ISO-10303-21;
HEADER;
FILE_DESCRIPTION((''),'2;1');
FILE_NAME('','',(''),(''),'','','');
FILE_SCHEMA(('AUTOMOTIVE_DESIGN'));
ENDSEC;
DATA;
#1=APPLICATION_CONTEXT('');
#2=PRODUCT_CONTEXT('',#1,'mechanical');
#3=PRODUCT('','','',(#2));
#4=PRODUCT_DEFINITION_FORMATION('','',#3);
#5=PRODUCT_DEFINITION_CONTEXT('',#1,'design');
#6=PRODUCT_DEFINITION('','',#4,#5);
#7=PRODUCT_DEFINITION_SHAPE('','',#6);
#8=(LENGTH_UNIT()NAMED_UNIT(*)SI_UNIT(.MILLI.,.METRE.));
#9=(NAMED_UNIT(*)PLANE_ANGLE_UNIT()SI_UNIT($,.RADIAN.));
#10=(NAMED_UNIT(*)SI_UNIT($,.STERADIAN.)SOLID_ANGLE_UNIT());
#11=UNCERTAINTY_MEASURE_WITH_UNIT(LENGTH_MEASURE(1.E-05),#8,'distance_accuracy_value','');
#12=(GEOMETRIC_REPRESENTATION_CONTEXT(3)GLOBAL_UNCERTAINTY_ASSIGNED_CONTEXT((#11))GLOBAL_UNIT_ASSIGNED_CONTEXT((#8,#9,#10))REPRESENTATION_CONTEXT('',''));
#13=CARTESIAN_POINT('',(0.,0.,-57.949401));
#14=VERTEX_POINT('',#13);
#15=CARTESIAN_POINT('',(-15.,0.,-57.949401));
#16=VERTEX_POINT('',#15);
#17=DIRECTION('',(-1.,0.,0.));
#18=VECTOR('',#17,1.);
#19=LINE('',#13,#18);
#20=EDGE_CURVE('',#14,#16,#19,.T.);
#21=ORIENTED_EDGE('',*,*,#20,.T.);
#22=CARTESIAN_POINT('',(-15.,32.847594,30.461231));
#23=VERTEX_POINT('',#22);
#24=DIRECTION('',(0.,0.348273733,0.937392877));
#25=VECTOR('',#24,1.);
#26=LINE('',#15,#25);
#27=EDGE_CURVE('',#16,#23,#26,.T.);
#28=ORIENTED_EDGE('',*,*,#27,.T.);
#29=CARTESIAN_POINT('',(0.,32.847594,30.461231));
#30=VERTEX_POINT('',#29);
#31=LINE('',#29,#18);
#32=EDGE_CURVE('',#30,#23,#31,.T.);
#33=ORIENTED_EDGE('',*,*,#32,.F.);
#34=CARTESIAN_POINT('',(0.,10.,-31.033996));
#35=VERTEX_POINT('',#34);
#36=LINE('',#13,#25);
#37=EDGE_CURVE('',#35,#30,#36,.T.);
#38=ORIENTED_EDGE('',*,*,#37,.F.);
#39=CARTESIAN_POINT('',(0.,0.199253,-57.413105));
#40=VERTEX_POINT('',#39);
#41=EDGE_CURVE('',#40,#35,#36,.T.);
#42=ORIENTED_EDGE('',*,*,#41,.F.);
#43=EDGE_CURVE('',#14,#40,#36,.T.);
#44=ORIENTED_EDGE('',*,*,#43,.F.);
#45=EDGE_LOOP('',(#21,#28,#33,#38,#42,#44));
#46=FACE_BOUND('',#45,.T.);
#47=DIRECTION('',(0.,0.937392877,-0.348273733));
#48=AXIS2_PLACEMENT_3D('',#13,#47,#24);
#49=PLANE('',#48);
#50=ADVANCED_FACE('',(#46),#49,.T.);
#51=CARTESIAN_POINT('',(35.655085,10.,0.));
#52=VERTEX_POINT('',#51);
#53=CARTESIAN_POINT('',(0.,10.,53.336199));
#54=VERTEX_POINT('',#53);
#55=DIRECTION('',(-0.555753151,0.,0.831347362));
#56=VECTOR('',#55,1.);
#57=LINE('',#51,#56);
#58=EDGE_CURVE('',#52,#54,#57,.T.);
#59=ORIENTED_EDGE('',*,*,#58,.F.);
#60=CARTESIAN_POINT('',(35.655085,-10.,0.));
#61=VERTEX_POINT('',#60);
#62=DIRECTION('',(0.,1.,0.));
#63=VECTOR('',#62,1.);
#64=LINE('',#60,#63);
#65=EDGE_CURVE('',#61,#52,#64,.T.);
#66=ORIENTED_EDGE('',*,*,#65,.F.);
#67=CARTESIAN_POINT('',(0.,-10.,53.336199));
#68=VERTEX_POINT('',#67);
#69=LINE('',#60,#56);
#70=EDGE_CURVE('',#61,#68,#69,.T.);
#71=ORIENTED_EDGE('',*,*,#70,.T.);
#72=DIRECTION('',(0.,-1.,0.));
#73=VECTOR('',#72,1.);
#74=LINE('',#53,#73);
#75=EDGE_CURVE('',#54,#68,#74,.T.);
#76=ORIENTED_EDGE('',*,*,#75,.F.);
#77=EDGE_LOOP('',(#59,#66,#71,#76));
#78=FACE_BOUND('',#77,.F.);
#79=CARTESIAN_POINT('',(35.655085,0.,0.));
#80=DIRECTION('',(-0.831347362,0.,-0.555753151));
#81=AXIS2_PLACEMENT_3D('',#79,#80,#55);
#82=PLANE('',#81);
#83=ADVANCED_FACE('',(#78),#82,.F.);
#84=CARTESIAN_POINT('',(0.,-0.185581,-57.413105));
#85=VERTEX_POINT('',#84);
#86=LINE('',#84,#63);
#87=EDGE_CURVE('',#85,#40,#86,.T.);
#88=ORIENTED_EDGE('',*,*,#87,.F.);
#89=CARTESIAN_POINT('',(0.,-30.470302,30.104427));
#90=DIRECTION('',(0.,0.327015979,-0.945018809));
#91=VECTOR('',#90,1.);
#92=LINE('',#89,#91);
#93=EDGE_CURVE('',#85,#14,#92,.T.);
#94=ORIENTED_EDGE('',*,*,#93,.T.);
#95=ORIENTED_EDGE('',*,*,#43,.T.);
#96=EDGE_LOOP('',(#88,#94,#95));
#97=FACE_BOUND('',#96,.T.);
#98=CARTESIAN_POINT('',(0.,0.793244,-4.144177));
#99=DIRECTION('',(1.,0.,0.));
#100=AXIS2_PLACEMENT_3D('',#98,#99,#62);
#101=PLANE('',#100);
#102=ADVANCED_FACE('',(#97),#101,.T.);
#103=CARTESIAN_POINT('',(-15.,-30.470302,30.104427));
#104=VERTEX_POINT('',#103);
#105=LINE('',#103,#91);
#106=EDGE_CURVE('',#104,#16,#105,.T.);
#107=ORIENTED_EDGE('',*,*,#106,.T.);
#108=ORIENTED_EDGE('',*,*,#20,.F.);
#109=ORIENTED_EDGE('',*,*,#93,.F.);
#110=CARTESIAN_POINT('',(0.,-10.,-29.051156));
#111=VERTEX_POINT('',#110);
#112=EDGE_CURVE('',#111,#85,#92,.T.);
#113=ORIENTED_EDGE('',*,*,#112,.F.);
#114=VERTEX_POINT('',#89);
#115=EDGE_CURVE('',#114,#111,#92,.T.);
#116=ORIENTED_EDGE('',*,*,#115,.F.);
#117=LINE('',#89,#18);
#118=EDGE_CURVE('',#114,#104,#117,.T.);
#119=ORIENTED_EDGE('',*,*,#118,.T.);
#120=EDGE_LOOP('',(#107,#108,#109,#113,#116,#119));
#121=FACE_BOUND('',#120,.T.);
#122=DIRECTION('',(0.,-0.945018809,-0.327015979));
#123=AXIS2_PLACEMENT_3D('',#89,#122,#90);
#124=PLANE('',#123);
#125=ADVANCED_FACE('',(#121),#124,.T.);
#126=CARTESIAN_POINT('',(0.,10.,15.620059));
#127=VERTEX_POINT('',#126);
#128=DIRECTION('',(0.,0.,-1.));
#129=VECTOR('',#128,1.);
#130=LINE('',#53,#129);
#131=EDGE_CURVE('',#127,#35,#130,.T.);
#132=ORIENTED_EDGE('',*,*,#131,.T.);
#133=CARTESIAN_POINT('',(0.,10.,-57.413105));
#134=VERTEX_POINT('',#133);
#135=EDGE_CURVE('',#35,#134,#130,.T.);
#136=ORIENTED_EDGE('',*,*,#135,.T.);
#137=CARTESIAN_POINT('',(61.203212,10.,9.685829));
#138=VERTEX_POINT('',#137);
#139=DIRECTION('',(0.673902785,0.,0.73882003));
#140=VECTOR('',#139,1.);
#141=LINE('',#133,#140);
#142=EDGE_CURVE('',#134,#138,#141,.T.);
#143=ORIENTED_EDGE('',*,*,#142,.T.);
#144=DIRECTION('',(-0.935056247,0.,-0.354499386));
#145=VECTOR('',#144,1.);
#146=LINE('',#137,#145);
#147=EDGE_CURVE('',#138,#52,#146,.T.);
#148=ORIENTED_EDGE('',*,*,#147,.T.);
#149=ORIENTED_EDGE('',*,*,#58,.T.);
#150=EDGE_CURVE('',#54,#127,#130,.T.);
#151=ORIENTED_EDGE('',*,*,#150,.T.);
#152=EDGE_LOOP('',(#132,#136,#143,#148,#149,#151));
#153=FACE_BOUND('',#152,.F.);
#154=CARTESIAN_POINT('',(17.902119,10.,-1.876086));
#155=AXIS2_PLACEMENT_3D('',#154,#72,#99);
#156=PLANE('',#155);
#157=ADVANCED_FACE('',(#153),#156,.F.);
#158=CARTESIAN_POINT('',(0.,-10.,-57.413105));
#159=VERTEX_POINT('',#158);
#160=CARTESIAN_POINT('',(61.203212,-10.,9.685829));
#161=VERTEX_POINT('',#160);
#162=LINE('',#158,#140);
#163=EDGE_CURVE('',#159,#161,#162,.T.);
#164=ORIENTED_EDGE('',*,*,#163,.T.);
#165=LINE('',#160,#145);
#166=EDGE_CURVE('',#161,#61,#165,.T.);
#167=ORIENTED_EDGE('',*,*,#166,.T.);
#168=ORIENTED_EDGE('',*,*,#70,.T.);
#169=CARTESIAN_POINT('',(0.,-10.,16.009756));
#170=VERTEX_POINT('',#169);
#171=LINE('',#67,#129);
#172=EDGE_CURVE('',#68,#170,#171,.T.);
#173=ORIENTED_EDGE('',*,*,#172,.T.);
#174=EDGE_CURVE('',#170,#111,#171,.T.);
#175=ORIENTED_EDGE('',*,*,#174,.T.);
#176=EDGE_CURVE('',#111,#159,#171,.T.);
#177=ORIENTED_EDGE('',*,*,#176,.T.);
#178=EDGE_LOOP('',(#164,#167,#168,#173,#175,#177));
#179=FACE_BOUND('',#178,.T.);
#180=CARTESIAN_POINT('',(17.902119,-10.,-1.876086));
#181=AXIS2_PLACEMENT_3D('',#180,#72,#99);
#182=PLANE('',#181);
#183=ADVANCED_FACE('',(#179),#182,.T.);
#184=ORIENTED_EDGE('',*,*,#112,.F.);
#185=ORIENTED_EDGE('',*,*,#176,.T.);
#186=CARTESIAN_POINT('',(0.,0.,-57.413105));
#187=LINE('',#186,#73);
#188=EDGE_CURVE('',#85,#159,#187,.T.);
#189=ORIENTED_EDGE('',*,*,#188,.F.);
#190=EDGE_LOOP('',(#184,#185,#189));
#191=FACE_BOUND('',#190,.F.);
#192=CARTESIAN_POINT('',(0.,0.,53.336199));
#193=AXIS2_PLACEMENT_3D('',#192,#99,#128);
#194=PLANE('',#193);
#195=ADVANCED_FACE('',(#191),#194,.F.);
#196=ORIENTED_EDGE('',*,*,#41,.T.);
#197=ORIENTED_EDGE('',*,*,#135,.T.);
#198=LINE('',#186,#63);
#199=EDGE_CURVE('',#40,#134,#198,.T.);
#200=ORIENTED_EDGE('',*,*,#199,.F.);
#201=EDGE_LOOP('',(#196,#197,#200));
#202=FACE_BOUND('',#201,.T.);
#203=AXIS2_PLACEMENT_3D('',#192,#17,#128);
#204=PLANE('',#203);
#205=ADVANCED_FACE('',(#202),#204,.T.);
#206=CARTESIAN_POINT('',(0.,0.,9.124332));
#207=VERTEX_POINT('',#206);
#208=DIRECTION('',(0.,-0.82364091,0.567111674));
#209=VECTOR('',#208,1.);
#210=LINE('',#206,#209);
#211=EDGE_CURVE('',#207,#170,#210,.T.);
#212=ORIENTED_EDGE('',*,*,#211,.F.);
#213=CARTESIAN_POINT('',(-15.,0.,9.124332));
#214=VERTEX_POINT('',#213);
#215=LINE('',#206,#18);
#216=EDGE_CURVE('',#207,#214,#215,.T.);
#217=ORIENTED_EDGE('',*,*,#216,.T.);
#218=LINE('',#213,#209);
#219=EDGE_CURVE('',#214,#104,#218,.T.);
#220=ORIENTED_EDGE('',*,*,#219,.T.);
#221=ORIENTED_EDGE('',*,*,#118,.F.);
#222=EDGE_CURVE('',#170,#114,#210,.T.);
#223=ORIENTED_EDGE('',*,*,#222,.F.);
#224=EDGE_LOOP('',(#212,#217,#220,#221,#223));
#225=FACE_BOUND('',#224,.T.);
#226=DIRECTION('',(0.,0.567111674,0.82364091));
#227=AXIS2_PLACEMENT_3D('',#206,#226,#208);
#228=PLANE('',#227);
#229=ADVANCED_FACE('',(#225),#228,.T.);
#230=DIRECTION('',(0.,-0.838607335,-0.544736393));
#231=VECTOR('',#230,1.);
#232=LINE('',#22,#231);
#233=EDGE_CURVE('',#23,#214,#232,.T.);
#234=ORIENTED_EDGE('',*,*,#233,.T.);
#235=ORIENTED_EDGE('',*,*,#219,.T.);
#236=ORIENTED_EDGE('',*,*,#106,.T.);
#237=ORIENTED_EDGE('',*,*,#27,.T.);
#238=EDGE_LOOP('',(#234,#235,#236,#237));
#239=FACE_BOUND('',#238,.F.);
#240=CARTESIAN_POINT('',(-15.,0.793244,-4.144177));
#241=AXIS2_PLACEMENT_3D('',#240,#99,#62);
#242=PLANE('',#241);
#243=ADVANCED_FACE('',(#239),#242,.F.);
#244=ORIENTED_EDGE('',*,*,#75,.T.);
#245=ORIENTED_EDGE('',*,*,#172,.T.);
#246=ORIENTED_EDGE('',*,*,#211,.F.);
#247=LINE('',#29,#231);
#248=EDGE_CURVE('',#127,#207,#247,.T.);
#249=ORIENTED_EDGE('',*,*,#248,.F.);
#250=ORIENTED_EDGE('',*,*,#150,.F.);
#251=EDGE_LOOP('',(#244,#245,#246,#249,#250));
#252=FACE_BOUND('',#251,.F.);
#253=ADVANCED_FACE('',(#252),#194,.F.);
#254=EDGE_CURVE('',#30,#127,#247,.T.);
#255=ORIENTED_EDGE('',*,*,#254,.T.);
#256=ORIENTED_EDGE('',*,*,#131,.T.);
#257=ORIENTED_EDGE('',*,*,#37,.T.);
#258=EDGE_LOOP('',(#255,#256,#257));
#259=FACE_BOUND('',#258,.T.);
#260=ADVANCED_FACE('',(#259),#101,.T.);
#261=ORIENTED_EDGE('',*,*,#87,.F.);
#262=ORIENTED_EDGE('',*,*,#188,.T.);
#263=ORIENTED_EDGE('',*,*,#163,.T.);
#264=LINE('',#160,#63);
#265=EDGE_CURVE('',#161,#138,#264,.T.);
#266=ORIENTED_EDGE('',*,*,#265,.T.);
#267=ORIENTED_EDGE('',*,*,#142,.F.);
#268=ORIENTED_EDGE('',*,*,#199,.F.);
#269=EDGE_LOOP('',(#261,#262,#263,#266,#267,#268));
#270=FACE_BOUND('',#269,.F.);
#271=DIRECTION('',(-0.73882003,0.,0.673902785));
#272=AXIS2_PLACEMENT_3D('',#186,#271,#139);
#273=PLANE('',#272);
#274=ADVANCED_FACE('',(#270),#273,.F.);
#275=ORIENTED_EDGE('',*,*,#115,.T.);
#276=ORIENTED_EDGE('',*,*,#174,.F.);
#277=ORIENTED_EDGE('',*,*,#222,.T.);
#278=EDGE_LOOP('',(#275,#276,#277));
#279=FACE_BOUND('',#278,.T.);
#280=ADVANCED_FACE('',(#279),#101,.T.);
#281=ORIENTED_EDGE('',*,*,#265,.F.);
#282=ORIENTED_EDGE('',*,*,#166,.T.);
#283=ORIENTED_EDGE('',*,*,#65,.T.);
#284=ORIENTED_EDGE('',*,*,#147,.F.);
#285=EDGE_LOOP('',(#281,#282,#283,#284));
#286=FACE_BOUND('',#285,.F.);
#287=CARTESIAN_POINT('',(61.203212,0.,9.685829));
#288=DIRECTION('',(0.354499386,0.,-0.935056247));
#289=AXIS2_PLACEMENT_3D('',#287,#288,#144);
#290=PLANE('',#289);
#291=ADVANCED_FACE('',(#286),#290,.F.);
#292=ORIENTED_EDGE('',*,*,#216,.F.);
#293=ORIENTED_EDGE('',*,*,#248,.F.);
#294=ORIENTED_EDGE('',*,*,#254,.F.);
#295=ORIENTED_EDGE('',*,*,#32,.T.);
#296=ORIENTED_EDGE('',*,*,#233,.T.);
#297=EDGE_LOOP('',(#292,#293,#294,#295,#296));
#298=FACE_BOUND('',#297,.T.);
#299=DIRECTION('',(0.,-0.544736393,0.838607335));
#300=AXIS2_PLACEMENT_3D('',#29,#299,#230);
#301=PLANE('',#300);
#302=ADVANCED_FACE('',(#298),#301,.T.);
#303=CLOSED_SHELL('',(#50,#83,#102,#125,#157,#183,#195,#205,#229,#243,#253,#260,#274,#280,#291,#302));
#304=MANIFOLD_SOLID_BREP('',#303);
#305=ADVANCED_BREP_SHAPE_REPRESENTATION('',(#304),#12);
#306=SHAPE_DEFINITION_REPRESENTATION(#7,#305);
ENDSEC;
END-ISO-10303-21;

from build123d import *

# Parameters (mm, degrees)
F2_DEPTH      = 15
F3_DEPTH      = 10
F3_DEPTH_BACK = 10


# Not quite as in the source:
# - a feature names something its author has since deleted; it is built from what else it names


with BuildPart() as f2:
    # F1 (on Right) → F2 (new body)
    with BuildSketch(Plane.YZ):
        Polygon((32.8475944698, 30.4612312466), (0, 9.1243321076), (-30.4703023285, 30.1044266671), (0, -57.9494014382), align=None)
    extrude(amount=-F2_DEPTH)

    # F0 (on Front) → F3 (join, two sides)
    with BuildSketch(Plane.XZ) as f3_sk:
        Polygon((35.6550849974, 0), (0, 53.336199373), (0, -57.4131049216), (61.2032115459, 9.6858292818), align=None)
    extrude(amount=-F3_DEPTH)
    extrude(f3_sk.sketch, amount=F3_DEPTH_BACK)


solid = f2.part
